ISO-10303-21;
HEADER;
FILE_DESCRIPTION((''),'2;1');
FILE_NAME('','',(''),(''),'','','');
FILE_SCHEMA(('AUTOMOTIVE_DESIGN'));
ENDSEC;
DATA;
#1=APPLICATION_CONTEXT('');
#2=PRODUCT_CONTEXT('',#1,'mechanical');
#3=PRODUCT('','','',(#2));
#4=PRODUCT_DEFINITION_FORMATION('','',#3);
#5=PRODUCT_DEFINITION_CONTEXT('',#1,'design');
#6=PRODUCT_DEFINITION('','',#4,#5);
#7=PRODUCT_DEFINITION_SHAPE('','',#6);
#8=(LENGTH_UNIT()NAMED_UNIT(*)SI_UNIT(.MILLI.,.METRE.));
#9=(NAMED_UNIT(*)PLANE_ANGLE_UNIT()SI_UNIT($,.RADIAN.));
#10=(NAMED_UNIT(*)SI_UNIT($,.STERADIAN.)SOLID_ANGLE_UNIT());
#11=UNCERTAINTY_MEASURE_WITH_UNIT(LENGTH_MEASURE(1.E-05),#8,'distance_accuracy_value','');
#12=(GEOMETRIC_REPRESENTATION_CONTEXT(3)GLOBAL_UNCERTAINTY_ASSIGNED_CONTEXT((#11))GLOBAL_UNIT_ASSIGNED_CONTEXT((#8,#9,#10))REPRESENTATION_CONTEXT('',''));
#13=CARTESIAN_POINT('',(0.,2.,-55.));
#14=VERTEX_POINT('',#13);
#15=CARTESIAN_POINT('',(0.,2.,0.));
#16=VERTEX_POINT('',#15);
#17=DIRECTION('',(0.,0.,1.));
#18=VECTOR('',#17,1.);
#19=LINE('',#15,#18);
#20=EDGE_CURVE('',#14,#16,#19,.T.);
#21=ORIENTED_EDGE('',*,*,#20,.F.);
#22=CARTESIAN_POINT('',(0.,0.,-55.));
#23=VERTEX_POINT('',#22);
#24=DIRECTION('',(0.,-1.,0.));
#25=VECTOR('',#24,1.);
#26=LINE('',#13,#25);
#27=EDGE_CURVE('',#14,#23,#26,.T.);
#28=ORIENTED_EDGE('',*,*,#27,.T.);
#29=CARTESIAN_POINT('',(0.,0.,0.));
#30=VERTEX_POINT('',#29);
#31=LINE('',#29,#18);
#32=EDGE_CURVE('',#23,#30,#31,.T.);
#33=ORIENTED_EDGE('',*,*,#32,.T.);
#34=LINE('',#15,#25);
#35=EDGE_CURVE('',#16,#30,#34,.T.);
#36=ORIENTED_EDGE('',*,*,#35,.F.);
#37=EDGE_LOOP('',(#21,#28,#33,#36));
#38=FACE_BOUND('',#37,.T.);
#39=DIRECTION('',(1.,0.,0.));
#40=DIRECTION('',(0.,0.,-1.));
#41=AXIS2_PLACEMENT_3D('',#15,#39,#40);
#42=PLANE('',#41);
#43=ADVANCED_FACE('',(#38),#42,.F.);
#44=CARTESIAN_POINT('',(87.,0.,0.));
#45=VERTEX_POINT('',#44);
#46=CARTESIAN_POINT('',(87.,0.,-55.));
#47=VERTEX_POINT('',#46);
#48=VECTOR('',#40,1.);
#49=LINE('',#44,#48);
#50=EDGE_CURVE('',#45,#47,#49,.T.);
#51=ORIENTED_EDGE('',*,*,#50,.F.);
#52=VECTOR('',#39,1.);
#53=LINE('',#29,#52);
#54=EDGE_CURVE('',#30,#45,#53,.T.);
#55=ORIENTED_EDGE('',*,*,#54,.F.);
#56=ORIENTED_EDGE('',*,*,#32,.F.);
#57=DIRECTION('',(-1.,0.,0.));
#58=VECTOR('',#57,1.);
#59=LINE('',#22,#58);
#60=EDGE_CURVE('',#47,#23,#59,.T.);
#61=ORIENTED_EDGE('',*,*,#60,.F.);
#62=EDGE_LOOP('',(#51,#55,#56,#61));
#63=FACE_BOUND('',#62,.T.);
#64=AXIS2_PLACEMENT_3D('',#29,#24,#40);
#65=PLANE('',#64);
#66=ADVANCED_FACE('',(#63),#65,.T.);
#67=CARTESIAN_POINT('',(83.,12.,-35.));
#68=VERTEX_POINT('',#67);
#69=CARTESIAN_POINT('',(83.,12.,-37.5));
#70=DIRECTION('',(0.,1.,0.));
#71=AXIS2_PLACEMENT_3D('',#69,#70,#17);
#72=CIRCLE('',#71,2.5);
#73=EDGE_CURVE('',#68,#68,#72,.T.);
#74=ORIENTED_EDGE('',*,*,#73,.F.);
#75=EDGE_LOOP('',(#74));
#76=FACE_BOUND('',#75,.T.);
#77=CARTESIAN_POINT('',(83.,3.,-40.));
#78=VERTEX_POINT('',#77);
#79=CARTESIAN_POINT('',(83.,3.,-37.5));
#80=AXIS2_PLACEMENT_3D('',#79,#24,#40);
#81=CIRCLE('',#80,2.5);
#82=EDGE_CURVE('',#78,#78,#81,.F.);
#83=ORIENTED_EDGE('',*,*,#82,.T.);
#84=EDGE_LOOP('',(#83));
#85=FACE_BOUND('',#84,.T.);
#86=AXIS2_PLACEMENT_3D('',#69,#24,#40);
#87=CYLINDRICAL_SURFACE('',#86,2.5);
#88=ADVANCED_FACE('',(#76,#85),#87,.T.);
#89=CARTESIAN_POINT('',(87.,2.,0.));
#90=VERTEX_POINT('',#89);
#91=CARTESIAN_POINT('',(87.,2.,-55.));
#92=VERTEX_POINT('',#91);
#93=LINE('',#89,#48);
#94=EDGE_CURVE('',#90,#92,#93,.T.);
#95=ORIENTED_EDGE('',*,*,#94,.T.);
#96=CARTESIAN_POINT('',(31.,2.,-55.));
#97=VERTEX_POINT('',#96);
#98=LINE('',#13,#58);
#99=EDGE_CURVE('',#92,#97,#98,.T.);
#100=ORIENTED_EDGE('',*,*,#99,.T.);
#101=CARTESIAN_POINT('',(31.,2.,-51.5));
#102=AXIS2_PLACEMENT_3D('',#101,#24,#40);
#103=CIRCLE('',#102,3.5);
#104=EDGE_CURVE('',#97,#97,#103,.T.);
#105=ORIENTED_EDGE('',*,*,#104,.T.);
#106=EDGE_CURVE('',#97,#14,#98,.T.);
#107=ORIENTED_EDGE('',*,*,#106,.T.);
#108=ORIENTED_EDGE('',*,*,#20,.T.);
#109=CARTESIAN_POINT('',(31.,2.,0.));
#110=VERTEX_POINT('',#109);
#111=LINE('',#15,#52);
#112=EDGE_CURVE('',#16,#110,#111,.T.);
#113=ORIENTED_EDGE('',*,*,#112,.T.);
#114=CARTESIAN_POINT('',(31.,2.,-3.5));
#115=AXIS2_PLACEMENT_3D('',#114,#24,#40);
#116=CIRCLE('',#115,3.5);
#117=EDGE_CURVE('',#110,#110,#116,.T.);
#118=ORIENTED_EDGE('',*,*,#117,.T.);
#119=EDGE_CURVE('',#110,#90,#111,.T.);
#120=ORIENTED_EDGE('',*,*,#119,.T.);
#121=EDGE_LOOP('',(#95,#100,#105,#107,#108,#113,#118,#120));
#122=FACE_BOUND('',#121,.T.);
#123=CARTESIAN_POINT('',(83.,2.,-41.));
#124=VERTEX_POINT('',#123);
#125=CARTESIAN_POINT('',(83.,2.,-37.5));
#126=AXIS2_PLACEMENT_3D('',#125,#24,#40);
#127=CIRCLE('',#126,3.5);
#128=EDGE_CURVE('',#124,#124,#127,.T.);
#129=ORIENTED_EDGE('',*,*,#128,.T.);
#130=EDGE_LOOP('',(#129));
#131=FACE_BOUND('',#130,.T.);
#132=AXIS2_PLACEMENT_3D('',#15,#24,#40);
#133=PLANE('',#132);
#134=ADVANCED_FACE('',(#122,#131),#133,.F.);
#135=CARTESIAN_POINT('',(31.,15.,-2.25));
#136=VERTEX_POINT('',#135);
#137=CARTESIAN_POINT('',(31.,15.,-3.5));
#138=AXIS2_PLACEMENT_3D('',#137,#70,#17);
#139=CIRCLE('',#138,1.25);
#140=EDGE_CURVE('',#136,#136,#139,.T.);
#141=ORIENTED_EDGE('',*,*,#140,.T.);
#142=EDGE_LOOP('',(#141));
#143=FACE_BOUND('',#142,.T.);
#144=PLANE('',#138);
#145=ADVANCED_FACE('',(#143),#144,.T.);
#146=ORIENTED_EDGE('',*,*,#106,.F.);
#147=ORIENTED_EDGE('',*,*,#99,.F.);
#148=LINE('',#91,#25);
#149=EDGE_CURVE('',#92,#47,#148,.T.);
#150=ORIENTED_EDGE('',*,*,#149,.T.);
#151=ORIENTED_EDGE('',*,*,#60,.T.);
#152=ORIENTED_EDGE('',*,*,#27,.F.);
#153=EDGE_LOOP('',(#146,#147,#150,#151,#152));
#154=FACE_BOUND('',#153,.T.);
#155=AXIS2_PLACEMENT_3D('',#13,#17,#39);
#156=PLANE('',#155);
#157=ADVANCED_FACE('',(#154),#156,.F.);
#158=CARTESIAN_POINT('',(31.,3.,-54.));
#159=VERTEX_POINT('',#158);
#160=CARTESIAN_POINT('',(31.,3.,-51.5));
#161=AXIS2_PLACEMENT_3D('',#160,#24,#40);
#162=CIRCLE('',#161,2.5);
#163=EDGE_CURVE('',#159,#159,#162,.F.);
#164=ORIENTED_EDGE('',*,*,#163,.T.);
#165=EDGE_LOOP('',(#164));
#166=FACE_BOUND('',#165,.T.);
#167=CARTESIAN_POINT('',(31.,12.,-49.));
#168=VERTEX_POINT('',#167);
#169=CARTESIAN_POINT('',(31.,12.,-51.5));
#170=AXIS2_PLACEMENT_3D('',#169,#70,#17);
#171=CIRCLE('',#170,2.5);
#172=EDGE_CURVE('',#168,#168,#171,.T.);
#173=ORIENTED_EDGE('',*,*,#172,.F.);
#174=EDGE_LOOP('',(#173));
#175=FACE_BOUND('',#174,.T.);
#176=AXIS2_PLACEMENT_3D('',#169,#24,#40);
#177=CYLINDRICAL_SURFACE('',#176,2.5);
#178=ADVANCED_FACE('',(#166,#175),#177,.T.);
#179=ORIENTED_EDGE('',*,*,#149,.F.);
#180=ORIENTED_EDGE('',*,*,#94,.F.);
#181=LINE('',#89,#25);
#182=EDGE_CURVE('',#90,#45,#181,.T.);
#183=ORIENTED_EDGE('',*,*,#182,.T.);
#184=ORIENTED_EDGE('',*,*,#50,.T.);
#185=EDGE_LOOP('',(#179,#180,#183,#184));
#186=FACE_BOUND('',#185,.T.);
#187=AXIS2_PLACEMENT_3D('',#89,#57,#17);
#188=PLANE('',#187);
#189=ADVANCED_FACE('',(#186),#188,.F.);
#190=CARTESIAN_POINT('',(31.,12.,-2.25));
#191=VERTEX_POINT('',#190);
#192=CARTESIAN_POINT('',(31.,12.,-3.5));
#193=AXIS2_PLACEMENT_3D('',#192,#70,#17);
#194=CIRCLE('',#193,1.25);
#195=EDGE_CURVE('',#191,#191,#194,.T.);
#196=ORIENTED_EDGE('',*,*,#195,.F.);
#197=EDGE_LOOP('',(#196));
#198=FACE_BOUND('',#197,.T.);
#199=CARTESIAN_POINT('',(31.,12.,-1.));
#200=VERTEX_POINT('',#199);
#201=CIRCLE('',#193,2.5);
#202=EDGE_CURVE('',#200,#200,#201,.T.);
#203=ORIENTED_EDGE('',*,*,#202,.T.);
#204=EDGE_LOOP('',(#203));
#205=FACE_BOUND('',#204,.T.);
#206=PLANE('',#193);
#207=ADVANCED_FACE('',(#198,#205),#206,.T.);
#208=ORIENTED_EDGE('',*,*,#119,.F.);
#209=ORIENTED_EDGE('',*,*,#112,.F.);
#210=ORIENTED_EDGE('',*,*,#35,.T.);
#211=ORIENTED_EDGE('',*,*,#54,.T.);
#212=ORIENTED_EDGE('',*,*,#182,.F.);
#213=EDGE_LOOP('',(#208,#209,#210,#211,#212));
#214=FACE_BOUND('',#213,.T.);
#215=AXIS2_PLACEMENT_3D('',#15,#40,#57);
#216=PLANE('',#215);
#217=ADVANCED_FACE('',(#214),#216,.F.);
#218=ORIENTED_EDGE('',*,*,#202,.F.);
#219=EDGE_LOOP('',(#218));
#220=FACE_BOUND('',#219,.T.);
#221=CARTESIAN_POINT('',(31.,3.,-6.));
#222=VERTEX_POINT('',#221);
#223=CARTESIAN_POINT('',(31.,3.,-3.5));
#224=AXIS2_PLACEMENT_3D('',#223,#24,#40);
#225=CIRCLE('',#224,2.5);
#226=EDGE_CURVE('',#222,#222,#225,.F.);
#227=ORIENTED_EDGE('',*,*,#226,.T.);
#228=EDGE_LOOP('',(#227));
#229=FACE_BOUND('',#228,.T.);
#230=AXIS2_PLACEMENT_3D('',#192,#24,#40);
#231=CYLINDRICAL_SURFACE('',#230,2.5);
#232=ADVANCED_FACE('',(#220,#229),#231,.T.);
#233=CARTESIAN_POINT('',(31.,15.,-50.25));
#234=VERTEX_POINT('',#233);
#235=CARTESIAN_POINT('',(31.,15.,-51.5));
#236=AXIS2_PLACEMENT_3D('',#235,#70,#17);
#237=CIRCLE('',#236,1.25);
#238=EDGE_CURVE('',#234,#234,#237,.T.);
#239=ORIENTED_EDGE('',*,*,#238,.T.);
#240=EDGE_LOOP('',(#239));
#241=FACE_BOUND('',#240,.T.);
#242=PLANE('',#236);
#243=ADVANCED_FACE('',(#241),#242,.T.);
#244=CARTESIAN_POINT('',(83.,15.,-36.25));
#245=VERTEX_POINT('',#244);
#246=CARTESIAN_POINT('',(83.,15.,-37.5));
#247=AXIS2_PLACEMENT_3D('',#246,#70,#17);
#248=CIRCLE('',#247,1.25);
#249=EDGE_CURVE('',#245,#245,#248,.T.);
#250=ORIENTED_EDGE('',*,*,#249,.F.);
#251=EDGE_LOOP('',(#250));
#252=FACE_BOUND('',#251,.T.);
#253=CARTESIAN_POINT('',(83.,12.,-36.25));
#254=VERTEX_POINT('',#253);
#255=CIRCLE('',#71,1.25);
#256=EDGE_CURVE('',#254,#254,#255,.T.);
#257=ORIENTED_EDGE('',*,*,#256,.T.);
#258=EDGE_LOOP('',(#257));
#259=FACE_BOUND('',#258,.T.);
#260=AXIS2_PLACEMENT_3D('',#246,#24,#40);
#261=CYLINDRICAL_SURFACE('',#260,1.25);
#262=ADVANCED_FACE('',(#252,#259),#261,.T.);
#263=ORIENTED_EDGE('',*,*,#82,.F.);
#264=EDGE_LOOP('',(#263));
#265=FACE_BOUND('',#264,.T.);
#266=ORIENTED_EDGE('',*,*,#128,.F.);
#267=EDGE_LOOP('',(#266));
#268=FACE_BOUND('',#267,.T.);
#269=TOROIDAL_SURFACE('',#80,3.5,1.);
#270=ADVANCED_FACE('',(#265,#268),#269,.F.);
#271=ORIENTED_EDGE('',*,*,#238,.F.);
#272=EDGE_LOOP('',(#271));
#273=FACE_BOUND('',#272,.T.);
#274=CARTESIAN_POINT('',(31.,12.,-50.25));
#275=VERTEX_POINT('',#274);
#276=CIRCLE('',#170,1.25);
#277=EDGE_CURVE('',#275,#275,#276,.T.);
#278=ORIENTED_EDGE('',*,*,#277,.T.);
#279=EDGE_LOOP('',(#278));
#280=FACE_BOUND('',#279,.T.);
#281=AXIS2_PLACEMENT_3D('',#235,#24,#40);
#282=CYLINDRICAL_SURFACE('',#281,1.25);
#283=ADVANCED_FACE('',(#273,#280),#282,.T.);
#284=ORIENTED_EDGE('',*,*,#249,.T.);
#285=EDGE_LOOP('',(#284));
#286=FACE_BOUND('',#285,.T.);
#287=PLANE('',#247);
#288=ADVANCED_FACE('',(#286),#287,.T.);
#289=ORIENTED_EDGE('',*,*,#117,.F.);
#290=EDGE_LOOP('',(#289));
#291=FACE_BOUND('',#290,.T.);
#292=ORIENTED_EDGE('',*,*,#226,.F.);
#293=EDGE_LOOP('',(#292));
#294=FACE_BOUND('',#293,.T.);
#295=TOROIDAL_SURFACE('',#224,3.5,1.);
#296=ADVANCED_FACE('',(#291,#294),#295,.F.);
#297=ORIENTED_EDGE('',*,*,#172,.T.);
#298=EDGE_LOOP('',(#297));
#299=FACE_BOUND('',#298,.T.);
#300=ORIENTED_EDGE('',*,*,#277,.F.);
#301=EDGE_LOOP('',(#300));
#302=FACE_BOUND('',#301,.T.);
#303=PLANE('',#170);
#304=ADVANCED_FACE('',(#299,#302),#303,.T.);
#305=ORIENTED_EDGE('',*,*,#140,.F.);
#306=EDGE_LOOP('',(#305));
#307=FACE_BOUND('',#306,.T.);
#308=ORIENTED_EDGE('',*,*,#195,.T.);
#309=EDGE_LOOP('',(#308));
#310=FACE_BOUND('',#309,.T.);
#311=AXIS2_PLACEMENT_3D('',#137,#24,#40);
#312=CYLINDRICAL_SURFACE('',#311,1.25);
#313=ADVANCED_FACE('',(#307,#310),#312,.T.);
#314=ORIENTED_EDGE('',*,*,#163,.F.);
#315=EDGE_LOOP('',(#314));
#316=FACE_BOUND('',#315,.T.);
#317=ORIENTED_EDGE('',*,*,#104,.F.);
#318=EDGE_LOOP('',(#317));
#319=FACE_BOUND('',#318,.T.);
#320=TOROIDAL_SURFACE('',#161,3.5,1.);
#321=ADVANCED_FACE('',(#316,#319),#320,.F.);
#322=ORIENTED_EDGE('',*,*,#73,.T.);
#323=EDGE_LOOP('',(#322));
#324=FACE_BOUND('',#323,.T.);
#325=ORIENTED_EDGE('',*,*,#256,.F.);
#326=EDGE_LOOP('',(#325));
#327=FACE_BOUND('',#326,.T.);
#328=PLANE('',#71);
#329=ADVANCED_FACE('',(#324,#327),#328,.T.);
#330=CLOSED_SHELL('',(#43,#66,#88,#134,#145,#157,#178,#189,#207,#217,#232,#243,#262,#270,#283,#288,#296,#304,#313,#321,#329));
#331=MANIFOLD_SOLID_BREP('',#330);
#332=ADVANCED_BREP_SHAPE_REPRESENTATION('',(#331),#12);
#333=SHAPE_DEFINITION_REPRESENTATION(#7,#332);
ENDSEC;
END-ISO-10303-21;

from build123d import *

# Parameters (mm, degrees)
SKETCH1_W           = 87
SKETCH1_H           = 55
BOSS_EXTRUDE1_DEPTH = 2
SKETCH2_R           = 2.5
BOSS_EXTRUDE2_DEPTH = 10
SKETCH3_R           = 1.25
BOSS_EXTRUDE3_DEPTH = 3
FILLET2_R           = 1


with BuildPart() as part:
    # Sketch1 → Boss-Extrude1 (new body)
    with BuildSketch(Plane(origin=(0, 0, 0), x_dir=(1, 0, 0), z_dir=(0, 1, 0))):
        with Locations((43.5, 27.5)):
            Rectangle(SKETCH1_W, SKETCH1_H)
    extrude(amount=BOSS_EXTRUDE1_DEPTH)

    # Sketch2 → Boss-Extrude2 (add)
    with BuildSketch(Plane(origin=(0, 2, 0), x_dir=(1, 0, 0), z_dir=(0, 1, 0))):
        with Locations(Location((31, 51.5, 0), (0, 0, 90))):
            Circle(SKETCH2_R)
        with Locations(Location((31, 3.5, 0), (0, 0, 90))):
            Circle(SKETCH2_R)
        with Locations(Location((83, 37.5, 0), (0, 0, 90))):
            Circle(SKETCH2_R)
    extrude(amount=BOSS_EXTRUDE2_DEPTH)

    # Sketch3 → Boss-Extrude3 (add)
    with BuildSketch(Plane(origin=(0, 12, 0), x_dir=(1, 0, 0), z_dir=(0, 1, 0))):
        with Locations(Location((31, 51.5, 0), (0, 0, 270))):
            Circle(SKETCH3_R)
        with Locations(Location((31, 3.5, 0), (0, 0, 270))):
            Circle(SKETCH3_R)
        with Locations(Location((83, 37.5, 0), (0, 0, 270))):
            Circle(SKETCH3_R)
    extrude(amount=BOSS_EXTRUDE3_DEPTH)

    # Fillet2
    fillet2_edges = [part.edges().sort_by_distance(p)[0] for p in [
        (83, 2, -35),
        (31, 2, -1),
        (31, 2, -49),
    ]]
    fillet(fillet2_edges, radius=FILLET2_R - 0.0001)  # a hair under: the kernel refuses the full size


solid = part.part
